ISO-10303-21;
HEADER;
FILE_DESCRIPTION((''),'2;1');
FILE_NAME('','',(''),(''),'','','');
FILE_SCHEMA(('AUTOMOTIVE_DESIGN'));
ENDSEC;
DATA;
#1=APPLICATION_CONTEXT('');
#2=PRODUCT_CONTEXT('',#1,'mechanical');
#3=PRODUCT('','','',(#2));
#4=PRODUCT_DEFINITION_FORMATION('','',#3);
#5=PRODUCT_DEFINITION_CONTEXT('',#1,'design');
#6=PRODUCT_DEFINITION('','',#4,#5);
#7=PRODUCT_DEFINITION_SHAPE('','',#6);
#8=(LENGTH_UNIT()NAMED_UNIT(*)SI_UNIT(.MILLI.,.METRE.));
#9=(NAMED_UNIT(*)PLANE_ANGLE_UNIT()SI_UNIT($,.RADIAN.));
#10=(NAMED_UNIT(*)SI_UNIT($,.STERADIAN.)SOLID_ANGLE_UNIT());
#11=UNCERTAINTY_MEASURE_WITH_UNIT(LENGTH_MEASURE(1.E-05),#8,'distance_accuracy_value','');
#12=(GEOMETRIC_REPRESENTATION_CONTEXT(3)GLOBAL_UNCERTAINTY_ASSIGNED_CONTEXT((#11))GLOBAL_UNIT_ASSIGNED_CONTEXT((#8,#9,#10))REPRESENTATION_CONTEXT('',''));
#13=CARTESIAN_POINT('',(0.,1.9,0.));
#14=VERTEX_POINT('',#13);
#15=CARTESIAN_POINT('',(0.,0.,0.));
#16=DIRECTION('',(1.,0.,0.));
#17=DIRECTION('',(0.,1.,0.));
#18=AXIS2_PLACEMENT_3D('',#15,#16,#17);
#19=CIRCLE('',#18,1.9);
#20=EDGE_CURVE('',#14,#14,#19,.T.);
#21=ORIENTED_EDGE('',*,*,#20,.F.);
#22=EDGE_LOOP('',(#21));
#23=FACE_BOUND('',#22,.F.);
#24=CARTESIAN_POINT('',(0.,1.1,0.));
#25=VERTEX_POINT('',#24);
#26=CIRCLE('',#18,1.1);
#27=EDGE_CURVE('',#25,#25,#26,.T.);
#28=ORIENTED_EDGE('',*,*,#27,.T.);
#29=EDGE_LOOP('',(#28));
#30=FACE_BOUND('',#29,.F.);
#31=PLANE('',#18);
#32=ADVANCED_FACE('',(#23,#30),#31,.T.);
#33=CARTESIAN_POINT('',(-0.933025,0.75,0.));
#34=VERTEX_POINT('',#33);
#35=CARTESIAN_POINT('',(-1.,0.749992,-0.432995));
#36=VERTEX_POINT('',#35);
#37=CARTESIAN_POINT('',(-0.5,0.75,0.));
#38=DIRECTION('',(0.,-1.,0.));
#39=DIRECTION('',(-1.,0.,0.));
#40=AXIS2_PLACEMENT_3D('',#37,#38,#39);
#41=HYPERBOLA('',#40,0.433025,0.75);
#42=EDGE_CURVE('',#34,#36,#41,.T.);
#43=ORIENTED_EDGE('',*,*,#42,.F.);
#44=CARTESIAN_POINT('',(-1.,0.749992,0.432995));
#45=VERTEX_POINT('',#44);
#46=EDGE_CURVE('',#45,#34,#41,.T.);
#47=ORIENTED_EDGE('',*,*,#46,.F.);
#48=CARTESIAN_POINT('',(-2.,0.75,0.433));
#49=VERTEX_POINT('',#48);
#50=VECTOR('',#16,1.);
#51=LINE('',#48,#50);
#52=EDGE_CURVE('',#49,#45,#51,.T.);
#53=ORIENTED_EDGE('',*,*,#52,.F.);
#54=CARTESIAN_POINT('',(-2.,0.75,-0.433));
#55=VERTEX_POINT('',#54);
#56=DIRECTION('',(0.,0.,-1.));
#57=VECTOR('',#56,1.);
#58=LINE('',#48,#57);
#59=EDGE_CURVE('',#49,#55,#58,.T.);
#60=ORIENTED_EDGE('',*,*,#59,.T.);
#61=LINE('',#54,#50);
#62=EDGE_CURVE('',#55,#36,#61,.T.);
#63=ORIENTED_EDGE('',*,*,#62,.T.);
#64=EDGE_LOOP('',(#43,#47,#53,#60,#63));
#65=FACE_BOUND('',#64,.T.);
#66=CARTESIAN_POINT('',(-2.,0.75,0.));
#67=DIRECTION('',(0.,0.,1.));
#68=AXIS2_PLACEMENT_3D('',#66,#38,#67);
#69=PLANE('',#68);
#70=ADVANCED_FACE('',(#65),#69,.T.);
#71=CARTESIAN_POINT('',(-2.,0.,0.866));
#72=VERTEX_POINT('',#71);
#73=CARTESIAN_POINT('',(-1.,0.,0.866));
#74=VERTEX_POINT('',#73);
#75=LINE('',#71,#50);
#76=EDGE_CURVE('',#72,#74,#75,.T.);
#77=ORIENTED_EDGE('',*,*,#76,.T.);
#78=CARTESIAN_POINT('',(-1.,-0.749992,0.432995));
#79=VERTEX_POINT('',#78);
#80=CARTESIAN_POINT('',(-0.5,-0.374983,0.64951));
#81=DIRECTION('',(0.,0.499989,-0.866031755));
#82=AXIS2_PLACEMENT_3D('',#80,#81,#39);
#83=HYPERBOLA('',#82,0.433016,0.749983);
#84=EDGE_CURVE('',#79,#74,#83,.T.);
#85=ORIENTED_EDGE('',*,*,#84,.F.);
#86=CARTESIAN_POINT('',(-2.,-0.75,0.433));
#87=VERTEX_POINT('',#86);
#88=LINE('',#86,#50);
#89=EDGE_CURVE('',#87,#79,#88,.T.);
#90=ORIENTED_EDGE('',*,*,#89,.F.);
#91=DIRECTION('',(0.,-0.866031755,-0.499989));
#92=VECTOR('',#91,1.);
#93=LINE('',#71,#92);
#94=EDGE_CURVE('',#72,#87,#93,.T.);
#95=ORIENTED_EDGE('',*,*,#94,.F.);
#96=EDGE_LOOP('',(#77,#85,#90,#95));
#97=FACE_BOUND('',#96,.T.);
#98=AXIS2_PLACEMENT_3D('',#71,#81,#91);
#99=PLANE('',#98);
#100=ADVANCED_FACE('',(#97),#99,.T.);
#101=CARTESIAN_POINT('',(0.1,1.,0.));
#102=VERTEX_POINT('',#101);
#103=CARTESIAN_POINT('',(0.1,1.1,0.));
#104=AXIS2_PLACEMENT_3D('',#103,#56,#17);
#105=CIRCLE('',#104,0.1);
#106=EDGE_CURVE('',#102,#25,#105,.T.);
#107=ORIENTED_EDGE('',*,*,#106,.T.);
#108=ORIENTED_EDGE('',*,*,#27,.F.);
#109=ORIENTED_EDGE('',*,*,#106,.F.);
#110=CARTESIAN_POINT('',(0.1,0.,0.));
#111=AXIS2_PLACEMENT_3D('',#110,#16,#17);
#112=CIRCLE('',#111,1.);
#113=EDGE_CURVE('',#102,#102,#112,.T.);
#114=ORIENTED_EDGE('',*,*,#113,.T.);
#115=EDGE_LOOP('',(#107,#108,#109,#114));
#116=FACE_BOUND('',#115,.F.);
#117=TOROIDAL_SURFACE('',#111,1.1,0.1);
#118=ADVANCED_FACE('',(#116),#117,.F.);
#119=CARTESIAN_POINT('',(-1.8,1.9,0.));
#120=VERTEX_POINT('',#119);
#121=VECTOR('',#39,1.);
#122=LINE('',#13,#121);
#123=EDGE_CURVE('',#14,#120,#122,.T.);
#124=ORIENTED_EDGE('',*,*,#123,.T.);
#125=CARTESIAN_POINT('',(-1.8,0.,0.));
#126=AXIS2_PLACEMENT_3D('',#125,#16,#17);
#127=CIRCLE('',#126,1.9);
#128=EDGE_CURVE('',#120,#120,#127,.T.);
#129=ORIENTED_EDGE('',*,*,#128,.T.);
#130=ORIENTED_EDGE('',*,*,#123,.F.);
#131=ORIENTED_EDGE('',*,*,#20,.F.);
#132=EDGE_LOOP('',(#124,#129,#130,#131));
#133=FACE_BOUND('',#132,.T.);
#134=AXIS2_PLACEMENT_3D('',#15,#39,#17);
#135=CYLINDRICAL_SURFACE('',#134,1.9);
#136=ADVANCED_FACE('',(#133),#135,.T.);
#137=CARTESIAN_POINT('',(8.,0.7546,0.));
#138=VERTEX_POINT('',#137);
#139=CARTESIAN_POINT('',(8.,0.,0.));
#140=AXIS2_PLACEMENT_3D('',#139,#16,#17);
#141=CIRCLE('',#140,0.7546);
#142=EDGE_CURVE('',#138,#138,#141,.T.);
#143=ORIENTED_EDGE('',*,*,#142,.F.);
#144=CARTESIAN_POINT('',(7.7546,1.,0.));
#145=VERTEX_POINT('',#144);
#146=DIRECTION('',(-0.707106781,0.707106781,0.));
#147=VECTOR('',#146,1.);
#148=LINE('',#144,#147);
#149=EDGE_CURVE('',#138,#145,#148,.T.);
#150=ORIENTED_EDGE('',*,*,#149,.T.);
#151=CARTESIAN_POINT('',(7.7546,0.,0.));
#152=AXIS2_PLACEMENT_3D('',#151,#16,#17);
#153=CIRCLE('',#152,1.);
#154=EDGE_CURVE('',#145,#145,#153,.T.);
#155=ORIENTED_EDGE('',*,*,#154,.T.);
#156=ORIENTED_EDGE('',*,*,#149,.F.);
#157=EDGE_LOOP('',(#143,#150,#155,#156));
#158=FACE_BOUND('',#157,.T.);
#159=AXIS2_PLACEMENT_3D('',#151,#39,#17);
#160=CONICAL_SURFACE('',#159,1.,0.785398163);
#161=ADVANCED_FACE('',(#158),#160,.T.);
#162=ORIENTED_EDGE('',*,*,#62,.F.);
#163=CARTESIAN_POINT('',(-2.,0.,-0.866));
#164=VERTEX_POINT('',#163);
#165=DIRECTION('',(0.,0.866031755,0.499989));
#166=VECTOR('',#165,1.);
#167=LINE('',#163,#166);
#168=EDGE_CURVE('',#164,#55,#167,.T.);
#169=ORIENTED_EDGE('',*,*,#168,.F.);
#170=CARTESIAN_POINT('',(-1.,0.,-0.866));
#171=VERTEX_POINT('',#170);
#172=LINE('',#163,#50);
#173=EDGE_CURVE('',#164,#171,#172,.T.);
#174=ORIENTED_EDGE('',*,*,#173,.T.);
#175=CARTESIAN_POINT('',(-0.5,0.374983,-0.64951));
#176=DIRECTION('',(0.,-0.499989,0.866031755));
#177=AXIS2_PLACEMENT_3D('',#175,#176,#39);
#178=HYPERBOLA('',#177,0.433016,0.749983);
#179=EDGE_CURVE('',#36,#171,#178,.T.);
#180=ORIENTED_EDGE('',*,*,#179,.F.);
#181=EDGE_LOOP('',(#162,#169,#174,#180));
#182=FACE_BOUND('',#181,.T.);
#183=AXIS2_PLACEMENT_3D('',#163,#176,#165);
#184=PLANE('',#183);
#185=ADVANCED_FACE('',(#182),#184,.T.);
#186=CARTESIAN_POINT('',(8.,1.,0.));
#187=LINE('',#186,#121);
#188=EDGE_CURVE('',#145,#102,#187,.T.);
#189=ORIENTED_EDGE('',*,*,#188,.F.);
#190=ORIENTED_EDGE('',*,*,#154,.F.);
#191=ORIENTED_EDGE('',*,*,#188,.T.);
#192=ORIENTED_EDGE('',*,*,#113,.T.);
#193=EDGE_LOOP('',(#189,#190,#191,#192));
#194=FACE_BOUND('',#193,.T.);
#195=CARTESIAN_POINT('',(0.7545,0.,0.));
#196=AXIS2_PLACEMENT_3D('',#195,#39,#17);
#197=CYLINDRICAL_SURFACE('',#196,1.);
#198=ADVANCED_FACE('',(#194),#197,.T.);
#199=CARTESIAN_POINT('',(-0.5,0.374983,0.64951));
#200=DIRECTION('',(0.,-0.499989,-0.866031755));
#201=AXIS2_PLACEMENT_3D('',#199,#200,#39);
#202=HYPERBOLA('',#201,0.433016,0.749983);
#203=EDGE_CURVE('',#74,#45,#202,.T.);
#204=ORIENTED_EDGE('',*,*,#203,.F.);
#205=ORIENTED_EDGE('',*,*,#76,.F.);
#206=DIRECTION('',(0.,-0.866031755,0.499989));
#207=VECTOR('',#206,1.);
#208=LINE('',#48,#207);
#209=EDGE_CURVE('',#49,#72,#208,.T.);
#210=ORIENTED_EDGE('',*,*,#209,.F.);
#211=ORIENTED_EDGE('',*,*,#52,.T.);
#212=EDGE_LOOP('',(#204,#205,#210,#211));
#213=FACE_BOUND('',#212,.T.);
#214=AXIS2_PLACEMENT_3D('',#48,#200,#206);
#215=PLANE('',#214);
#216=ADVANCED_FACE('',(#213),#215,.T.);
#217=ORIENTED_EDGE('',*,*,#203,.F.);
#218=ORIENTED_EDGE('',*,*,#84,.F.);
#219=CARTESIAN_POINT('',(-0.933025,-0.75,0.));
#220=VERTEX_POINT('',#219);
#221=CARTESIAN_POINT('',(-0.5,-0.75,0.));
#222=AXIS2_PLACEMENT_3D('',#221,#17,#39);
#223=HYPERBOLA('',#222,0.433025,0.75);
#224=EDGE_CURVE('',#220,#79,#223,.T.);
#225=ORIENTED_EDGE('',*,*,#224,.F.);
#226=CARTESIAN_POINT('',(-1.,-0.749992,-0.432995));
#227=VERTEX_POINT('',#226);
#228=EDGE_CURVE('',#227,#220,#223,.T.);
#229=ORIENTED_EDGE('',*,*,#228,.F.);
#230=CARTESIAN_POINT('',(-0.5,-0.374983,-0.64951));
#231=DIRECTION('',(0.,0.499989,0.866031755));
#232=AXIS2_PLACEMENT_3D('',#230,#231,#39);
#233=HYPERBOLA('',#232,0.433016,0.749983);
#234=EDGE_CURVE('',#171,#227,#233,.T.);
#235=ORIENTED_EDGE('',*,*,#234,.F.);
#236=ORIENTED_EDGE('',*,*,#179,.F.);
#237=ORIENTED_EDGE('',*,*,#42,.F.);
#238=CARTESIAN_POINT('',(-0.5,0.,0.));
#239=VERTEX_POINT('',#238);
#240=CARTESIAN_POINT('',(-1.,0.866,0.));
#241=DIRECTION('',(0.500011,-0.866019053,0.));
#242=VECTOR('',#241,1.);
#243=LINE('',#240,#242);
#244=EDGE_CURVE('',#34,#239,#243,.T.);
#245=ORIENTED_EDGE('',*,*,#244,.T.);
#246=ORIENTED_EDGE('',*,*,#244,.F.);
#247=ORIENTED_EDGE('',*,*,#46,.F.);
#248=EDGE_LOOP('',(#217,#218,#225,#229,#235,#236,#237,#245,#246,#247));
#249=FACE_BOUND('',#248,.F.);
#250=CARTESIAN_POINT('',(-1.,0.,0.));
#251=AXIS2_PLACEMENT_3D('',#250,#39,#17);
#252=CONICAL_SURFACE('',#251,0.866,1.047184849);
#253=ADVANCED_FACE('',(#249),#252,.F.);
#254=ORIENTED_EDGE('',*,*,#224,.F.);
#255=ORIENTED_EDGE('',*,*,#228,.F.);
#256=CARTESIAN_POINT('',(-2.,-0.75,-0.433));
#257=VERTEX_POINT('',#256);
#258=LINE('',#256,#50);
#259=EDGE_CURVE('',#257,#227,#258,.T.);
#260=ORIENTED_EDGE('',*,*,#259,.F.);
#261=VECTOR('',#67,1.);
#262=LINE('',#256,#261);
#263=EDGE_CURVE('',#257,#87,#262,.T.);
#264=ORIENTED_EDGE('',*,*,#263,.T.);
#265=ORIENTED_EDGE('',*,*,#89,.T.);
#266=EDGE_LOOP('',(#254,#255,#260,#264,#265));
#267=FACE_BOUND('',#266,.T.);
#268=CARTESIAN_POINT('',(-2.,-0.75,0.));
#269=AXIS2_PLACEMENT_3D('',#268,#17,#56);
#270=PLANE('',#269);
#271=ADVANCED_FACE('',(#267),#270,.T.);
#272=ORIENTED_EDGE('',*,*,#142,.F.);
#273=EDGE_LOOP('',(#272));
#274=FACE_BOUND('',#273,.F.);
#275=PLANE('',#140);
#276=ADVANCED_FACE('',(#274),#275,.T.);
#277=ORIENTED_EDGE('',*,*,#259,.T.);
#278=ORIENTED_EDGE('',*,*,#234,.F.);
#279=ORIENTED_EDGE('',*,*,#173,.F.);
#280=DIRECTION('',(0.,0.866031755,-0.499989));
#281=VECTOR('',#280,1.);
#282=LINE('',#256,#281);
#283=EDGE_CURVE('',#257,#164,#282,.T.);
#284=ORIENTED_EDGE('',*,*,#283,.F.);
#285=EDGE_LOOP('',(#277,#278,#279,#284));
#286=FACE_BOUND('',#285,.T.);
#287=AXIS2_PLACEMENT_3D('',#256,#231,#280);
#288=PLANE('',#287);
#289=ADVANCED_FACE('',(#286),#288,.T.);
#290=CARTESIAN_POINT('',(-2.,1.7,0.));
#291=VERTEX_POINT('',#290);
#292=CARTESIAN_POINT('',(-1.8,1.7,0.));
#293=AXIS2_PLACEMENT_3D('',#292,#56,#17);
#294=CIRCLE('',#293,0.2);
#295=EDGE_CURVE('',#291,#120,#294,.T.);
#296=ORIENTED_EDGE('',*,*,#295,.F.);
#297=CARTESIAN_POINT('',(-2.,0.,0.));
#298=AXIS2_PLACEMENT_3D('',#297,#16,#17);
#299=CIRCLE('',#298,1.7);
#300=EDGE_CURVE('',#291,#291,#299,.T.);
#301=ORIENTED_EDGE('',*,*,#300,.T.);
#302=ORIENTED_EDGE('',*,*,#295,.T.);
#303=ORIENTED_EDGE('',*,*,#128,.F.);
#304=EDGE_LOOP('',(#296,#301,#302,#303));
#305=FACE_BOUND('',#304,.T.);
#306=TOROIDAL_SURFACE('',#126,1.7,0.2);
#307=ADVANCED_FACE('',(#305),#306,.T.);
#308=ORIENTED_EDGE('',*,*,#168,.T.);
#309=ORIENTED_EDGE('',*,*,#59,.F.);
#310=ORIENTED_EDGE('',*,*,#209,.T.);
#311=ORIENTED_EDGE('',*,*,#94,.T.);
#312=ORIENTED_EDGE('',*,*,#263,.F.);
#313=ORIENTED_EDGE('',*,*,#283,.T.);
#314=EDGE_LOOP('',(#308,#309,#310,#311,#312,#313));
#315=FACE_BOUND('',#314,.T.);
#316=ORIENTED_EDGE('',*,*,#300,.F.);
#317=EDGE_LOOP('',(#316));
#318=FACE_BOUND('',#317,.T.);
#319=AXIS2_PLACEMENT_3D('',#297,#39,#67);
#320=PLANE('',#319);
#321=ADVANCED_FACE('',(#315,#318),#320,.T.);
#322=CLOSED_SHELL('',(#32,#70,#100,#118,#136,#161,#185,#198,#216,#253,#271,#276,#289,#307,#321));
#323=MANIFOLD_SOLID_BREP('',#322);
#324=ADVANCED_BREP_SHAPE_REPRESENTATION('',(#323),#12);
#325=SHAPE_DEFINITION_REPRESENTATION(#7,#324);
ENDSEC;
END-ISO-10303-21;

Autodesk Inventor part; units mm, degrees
ref_plane "YZ Plane" through (0, 0, 0) normal (1, 0, 0) x (0, 1, 0)
ref_plane "XZ Plane" through (0, 0, 0) normal (0, 1, 0) x (-1, 0, 0)
sketch "Sketch1" plane through (0, 0, 0) normal (0, 0, 1) x (1, 0, 0)
  line L0 (-0.5, 0) -> (8, 0)
  line L1 (8, 0) -> (8, 1)
  line L2 (8, 1) -> (1, 1)
  line L3 (1, 1) -> (0.7545, 1)
  line L4 (0.7545, 1) -> (0, 1)
  line L5 (0, 1) -> (0, 1.9)
  line L6 (0, 1.9) -> (-2, 1.9)
  line L7 (-2, 1.9) -> (-2, 0.866)
  line L8 (-2, 0.866) -> (-1, 0.866)
  line L9 (-1, 0.866) -> (-0.5, 0)
  line L10 (-4, 0) -> (10, 0) projected
  line L11 (0, -0.38) -> (0, 2.28) projected
  line L12 (1, 1) -> (0, 1) construction
  dimension "d1" = 7
  dimension "d2" = 0.2455
  dimension "d3" = 2
  dimension "d4" = 1
  dimension "d5" = 60
  dimension "d6" = 2
  dimension "d7" = 2
  dimension "d8" = 1.7321
  dimension "d9" = 3.8
  dimension "d26" = 8
revolve "Body" add sketch "Sketch1" angle 360 about axis through (-0.5, 0, 0) along (1, 0, 0)
sketch "Sketch2" plane through (-2, 0, 0) normal (-1, 0, 0) x (0, 0, 1)
  circle A0 centre (0, 0) radius 0.866 projected
  line L0 (0, -2.66) -> (0, 2.66) projected
  line L1 (-2.66, 0) -> (2.66, 0) projected
  line L2 (0.866, 0) -> (0.433, -0.75)
  line L3 (0.433, -0.75) -> (-0.433, -0.75)
  line L4 (-0.433, -0.75) -> (-0.866, 0)
  line L5 (-0.866, 0) -> (-0.433, 0.75)
  line L6 (-0.433, 0.75) -> (0.433, 0.75)
  line L7 (0.433, 0.75) -> (0.866, 0)
  point P0 (0, 0)
extrude "Slot" add sketch "Sketch2" against normal up to next contours L7 A0 | A0 L2 | L6 L0 A0 | A0 L0 L3 | L0 L6 A0 | A0 L3 L0 | L4 A0 | A0 L5
fillet "Fillet1" radius 0.2 1 edges at (-2, -1.9, 0)
thread "Thread" size "M2x0.4" class "6g" standard "ISO Metric profile" length 7
chamfer "Chamfer1" distance 0.2454 distance2 0.2454 1 edges at (8, -1, 0) measured on face at (8, 0.1182, 0.3117)
ref_plane "Work Plane1" through (29, 0, 0) normal (0, -1, 0) x (1, 0, 0)
fillet "Fillet2" radius 0.1 1 edges at (0, -1, 0)
equation "\"d1\" = GEL"
equation "\"d3\" = KOH"
equation "\"d4\" = INTI"
equation "\"d6\" = GD"
equation "\"d7\" = BDM"
equation "\"d8\" = 1.1547 * SW"
equation "\"d9\" = KOD"
equation "\"d26\" = NLG"
equation "\"d30\" = R"
equation "\"d17\" = RR"
equation "\"d13\" = GEL"
equation "\"d15\" = -0.5 * SPD + 0.5 * GD"
equation "\"d16\" = GUL"
equation "\"GD\" = NND"
equation "\"NLG\" = 8"
equation "\"GEL\" = 7"
equation "\"KOD\" = 3.8"
equation "\"KOH\" = NND"
equation "\"INTI\" = 1"
equation "\"GAL\" = 0.61345 * PTC"
equation "\"GUL\" = 0.61345 * PTC"
equation "\"BDM\" = NND"
equation "\"SW\" = 1.5"
equation "\"RR\" = 0.1 * NND"
equation "\"SPD\" = NND - 1.2269 * PTC"
equation "\"R\" = 0.1"
equation "\"TOA\" = 30deg"
equation "\"GD1\" = THREADDIA - 1.2269 * PTC"
equation "\"THREADDIA\" = NND"
equation "\"FAWI\" = 45deg"
equation "\"PTC\" = 0.4"
equation "\"NND\" = 2"
equation "\"E0\" = 1.155 * SW"
properties part number "BS EN ISO 4762 - M2 x 8" material "Steel, Mild"
